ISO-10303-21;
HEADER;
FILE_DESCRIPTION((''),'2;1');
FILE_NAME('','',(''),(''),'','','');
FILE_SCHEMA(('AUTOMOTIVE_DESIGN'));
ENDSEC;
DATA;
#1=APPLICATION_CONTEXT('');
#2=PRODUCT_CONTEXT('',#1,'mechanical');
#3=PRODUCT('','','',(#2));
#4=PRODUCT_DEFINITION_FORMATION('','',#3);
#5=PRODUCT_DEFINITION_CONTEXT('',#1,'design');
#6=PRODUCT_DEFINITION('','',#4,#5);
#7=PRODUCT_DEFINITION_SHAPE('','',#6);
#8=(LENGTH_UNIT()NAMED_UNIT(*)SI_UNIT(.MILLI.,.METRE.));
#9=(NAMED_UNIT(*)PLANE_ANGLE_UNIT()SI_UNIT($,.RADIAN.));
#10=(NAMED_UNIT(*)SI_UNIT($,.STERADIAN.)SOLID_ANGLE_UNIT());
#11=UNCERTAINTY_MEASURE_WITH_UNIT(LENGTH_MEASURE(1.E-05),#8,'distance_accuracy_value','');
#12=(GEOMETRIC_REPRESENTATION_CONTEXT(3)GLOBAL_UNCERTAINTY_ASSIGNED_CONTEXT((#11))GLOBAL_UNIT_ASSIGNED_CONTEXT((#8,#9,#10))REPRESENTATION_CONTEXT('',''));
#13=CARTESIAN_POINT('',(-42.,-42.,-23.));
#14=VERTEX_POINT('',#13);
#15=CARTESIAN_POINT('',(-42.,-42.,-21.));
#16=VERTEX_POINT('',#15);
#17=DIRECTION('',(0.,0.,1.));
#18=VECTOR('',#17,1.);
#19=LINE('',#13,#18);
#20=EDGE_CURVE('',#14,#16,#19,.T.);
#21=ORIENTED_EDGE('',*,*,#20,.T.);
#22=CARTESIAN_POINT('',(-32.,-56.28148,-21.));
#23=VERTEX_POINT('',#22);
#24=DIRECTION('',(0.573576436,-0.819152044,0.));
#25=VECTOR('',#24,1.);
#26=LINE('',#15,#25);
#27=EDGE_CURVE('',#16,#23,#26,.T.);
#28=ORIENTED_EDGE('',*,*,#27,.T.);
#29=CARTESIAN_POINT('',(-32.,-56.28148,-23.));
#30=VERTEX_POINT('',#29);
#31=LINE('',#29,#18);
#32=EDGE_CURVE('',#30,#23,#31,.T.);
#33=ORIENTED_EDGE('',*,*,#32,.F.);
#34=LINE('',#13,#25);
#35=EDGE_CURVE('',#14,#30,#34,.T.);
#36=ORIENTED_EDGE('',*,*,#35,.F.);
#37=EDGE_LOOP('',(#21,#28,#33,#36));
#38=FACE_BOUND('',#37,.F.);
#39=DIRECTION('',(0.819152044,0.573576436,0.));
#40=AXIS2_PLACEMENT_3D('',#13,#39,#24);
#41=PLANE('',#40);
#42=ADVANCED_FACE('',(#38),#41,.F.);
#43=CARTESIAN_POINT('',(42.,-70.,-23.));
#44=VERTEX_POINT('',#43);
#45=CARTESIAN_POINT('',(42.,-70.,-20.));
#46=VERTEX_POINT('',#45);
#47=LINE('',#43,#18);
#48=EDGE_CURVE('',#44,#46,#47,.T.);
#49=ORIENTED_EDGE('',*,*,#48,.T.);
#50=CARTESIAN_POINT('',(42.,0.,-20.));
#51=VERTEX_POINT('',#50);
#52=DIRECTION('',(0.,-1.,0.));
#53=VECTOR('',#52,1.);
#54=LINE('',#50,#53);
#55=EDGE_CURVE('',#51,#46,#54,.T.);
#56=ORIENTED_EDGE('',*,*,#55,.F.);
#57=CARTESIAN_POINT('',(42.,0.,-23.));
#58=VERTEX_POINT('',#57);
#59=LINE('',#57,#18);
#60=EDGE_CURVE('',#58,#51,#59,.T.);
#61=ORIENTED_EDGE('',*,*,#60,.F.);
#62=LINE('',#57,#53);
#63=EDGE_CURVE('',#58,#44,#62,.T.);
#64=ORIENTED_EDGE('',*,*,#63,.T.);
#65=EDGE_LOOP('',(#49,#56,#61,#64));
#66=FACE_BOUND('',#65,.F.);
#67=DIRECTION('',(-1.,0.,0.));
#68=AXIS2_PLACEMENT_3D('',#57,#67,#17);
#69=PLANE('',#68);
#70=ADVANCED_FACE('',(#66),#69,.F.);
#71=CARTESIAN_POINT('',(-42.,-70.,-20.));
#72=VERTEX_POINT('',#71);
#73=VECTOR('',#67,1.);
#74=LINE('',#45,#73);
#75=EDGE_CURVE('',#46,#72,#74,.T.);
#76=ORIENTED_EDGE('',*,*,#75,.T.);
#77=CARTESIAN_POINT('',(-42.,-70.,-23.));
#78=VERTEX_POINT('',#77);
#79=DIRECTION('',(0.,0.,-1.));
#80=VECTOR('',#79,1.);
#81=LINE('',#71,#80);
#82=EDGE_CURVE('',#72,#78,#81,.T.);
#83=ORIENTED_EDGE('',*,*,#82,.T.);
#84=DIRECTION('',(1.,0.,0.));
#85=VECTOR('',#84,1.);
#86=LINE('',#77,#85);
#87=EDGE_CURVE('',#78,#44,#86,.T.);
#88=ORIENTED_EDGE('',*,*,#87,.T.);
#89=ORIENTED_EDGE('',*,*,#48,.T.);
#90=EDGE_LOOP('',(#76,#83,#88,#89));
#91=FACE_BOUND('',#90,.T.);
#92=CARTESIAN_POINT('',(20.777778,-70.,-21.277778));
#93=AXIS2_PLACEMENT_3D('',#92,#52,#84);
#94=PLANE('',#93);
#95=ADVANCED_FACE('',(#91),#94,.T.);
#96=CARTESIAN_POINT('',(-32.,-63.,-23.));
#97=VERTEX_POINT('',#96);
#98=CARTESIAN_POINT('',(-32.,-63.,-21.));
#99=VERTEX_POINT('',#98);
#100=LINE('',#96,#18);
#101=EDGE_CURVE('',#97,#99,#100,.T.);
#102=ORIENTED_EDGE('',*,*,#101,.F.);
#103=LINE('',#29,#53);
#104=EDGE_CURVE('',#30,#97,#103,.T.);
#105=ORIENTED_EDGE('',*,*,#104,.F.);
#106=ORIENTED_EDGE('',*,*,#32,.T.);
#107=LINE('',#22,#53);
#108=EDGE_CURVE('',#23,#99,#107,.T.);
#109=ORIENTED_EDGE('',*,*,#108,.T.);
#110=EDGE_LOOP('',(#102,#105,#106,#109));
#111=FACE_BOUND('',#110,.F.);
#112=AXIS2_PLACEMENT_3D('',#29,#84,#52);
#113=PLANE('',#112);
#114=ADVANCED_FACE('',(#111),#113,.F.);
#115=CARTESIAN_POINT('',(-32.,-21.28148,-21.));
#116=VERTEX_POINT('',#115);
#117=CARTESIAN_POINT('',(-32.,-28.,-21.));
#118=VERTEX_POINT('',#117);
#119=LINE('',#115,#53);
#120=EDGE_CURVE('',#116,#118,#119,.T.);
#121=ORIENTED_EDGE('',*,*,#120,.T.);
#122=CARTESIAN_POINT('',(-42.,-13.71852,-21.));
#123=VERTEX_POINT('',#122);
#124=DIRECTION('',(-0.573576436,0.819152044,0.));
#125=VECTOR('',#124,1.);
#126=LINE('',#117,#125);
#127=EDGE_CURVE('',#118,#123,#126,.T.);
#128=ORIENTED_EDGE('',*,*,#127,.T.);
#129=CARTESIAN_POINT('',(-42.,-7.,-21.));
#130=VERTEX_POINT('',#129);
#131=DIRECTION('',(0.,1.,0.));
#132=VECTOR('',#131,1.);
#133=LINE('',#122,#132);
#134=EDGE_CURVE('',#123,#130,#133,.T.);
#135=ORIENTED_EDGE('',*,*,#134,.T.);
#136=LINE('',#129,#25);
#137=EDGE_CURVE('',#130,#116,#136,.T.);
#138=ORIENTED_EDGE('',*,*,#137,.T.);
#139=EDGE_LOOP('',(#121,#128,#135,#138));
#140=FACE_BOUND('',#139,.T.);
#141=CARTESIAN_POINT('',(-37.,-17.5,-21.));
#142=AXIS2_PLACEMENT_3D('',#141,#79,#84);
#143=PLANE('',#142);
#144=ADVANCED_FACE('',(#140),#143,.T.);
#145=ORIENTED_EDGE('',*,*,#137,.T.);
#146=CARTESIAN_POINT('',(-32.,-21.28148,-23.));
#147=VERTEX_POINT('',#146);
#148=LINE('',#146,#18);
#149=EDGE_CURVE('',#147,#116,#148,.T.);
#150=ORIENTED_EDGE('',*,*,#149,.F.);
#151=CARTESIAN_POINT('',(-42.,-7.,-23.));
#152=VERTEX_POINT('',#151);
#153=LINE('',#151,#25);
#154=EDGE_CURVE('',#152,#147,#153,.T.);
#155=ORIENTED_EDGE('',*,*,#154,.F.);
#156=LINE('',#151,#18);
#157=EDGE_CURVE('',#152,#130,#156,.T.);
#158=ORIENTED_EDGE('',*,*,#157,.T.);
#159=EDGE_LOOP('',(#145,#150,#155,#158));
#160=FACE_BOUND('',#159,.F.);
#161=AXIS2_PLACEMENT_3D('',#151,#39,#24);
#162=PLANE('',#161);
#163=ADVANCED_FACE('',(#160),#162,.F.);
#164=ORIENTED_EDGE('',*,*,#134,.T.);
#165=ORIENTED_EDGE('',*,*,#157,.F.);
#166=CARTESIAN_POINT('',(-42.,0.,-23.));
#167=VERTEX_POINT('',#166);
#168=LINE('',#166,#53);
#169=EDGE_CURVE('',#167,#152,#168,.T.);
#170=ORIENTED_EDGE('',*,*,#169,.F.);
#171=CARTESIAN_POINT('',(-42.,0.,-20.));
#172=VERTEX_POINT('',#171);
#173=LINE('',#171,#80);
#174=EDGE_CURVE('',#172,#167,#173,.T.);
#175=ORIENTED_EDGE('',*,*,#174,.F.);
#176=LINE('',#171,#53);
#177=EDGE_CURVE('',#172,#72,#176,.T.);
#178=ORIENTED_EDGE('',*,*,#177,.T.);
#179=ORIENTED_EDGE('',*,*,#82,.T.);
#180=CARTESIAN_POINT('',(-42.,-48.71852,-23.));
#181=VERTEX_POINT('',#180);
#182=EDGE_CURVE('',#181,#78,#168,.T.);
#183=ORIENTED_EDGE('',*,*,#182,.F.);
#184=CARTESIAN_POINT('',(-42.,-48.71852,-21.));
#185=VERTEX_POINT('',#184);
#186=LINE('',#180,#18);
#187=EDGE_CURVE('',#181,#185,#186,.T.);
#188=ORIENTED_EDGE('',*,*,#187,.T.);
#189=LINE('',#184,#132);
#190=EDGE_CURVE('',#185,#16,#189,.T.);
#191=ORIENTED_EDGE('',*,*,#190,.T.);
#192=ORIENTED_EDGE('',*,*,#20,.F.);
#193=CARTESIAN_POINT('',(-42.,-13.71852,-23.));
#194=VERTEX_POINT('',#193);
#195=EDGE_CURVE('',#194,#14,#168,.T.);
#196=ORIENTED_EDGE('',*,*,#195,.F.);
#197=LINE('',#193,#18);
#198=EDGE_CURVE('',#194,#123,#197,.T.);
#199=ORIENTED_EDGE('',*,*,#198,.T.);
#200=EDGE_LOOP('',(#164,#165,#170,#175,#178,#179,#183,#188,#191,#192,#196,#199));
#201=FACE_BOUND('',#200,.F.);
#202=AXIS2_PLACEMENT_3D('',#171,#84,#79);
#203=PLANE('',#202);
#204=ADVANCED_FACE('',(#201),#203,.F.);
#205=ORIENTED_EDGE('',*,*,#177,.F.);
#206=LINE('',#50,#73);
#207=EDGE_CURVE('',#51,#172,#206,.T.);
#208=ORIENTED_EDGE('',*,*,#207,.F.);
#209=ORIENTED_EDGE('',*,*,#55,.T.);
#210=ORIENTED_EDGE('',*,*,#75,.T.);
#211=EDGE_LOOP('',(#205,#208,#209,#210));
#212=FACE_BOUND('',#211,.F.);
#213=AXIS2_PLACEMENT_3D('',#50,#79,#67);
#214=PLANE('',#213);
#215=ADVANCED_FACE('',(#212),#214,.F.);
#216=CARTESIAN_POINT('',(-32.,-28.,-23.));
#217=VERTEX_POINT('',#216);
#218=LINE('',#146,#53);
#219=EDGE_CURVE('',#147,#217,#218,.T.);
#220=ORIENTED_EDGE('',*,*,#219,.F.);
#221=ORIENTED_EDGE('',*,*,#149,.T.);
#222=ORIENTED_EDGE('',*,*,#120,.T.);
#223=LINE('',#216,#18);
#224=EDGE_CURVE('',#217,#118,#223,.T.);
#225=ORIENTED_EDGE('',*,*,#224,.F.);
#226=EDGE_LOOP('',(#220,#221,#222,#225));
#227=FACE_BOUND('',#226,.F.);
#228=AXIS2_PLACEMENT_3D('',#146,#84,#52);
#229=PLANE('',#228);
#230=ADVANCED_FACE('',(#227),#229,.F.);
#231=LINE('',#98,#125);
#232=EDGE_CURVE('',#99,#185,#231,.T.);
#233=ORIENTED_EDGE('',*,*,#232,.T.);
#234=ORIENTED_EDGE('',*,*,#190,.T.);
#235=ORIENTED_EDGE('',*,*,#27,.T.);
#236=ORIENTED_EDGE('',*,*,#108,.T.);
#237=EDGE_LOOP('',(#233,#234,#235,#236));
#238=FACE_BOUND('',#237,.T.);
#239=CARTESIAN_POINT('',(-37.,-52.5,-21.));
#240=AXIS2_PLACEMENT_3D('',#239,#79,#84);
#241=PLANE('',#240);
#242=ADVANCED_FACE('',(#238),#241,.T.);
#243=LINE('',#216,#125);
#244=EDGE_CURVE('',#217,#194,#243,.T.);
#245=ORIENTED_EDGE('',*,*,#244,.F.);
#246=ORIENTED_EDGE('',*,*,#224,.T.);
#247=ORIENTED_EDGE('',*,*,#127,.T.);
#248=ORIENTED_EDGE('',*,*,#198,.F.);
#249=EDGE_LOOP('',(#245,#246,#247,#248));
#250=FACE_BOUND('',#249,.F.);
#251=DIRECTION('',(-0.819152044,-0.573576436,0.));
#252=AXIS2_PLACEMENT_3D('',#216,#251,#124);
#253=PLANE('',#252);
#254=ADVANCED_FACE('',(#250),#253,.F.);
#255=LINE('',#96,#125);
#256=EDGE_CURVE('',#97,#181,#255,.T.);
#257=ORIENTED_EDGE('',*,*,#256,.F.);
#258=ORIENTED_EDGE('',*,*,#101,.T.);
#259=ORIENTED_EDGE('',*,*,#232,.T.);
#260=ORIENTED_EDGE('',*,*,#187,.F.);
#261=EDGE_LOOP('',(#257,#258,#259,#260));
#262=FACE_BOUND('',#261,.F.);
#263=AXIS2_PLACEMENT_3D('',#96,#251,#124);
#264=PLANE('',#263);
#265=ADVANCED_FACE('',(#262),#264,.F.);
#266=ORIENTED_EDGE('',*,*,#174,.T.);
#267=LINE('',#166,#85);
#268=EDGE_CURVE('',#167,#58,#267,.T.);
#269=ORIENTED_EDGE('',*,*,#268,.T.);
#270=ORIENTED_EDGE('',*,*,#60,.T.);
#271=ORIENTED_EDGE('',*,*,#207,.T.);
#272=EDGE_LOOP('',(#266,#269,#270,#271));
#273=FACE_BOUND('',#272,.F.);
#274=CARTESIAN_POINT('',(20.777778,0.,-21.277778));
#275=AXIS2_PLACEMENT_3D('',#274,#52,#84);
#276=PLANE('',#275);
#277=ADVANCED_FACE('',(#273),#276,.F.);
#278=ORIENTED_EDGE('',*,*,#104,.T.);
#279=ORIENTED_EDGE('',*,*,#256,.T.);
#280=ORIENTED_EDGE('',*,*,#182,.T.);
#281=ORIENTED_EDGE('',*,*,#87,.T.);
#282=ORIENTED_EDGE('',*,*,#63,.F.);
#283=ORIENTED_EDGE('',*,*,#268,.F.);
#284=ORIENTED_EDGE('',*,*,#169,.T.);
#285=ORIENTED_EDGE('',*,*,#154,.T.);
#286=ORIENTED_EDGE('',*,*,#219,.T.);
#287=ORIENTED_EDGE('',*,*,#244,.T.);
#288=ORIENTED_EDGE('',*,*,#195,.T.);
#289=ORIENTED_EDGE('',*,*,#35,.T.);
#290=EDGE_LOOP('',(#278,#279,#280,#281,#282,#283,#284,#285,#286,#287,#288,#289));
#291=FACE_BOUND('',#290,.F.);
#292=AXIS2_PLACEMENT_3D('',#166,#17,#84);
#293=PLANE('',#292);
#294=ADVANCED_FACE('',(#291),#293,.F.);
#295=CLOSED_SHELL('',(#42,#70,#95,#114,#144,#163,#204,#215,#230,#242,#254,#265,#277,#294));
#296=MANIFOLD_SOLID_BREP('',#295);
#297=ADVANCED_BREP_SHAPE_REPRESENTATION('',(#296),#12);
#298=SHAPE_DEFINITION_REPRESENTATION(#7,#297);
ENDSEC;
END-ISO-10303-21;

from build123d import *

# Parameters (mm, degrees)
F1_DEPTH = 70
F3_DEPTH = 2


# Not quite as in the source:
# - a feature names something its author has since deleted; it is built from what else it names


with BuildPart() as f1:
    # F0 (on Front) → F1 (new body)
    with BuildSketch(Plane.XZ):
        Polygon((0, -20), (0, -23), (32, -23), (32, -21), (38, -21), (42, -21), (42, -20), align=None)
        Polygon((-32, -23), (0, -23), (0, -20), (-17, -20), (-21, -20), (-30, -20), (-34, -20), (-34, -21), (-32, -21), align=None)
        Polygon((32, -21), (32, -23), (38, -23), (38, -22.25), (38, -21), align=None)
        Polygon((-38, -23), (-32, -23), (-32, -21), (-34, -21), (-38, -21), (-38, -22.25), align=None)
        Polygon((38, -22.25), (38, -23), (42, -23), (42, -21), (38, -21), align=None)
        Polygon((-42, -23), (-38, -23), (-38, -22.25), (-38, -21), (-42, -21), align=None)
        Polygon((-38, -21), (-34, -21), (-34, -20), (-42, -20), (-42, -21), align=None)
    extrude(amount=F1_DEPTH)

    # F2 (on face) → F3 (cut)
    with BuildSketch(Plane(origin=(0, 0, -23), x_dir=(1, 0, 0), z_dir=(0, 0, -1))):
        Polygon((-32, 28), (-42, 13.7185199326), (-42, 7), (-32, 21.2814800674), align=None)
        Polygon((-32, 63), (-42, 48.7185199326), (-42, 42), (-32, 56.2814800674), align=None)
    extrude(amount=-F3_DEPTH, mode=Mode.SUBTRACT)


solid = f1.part
